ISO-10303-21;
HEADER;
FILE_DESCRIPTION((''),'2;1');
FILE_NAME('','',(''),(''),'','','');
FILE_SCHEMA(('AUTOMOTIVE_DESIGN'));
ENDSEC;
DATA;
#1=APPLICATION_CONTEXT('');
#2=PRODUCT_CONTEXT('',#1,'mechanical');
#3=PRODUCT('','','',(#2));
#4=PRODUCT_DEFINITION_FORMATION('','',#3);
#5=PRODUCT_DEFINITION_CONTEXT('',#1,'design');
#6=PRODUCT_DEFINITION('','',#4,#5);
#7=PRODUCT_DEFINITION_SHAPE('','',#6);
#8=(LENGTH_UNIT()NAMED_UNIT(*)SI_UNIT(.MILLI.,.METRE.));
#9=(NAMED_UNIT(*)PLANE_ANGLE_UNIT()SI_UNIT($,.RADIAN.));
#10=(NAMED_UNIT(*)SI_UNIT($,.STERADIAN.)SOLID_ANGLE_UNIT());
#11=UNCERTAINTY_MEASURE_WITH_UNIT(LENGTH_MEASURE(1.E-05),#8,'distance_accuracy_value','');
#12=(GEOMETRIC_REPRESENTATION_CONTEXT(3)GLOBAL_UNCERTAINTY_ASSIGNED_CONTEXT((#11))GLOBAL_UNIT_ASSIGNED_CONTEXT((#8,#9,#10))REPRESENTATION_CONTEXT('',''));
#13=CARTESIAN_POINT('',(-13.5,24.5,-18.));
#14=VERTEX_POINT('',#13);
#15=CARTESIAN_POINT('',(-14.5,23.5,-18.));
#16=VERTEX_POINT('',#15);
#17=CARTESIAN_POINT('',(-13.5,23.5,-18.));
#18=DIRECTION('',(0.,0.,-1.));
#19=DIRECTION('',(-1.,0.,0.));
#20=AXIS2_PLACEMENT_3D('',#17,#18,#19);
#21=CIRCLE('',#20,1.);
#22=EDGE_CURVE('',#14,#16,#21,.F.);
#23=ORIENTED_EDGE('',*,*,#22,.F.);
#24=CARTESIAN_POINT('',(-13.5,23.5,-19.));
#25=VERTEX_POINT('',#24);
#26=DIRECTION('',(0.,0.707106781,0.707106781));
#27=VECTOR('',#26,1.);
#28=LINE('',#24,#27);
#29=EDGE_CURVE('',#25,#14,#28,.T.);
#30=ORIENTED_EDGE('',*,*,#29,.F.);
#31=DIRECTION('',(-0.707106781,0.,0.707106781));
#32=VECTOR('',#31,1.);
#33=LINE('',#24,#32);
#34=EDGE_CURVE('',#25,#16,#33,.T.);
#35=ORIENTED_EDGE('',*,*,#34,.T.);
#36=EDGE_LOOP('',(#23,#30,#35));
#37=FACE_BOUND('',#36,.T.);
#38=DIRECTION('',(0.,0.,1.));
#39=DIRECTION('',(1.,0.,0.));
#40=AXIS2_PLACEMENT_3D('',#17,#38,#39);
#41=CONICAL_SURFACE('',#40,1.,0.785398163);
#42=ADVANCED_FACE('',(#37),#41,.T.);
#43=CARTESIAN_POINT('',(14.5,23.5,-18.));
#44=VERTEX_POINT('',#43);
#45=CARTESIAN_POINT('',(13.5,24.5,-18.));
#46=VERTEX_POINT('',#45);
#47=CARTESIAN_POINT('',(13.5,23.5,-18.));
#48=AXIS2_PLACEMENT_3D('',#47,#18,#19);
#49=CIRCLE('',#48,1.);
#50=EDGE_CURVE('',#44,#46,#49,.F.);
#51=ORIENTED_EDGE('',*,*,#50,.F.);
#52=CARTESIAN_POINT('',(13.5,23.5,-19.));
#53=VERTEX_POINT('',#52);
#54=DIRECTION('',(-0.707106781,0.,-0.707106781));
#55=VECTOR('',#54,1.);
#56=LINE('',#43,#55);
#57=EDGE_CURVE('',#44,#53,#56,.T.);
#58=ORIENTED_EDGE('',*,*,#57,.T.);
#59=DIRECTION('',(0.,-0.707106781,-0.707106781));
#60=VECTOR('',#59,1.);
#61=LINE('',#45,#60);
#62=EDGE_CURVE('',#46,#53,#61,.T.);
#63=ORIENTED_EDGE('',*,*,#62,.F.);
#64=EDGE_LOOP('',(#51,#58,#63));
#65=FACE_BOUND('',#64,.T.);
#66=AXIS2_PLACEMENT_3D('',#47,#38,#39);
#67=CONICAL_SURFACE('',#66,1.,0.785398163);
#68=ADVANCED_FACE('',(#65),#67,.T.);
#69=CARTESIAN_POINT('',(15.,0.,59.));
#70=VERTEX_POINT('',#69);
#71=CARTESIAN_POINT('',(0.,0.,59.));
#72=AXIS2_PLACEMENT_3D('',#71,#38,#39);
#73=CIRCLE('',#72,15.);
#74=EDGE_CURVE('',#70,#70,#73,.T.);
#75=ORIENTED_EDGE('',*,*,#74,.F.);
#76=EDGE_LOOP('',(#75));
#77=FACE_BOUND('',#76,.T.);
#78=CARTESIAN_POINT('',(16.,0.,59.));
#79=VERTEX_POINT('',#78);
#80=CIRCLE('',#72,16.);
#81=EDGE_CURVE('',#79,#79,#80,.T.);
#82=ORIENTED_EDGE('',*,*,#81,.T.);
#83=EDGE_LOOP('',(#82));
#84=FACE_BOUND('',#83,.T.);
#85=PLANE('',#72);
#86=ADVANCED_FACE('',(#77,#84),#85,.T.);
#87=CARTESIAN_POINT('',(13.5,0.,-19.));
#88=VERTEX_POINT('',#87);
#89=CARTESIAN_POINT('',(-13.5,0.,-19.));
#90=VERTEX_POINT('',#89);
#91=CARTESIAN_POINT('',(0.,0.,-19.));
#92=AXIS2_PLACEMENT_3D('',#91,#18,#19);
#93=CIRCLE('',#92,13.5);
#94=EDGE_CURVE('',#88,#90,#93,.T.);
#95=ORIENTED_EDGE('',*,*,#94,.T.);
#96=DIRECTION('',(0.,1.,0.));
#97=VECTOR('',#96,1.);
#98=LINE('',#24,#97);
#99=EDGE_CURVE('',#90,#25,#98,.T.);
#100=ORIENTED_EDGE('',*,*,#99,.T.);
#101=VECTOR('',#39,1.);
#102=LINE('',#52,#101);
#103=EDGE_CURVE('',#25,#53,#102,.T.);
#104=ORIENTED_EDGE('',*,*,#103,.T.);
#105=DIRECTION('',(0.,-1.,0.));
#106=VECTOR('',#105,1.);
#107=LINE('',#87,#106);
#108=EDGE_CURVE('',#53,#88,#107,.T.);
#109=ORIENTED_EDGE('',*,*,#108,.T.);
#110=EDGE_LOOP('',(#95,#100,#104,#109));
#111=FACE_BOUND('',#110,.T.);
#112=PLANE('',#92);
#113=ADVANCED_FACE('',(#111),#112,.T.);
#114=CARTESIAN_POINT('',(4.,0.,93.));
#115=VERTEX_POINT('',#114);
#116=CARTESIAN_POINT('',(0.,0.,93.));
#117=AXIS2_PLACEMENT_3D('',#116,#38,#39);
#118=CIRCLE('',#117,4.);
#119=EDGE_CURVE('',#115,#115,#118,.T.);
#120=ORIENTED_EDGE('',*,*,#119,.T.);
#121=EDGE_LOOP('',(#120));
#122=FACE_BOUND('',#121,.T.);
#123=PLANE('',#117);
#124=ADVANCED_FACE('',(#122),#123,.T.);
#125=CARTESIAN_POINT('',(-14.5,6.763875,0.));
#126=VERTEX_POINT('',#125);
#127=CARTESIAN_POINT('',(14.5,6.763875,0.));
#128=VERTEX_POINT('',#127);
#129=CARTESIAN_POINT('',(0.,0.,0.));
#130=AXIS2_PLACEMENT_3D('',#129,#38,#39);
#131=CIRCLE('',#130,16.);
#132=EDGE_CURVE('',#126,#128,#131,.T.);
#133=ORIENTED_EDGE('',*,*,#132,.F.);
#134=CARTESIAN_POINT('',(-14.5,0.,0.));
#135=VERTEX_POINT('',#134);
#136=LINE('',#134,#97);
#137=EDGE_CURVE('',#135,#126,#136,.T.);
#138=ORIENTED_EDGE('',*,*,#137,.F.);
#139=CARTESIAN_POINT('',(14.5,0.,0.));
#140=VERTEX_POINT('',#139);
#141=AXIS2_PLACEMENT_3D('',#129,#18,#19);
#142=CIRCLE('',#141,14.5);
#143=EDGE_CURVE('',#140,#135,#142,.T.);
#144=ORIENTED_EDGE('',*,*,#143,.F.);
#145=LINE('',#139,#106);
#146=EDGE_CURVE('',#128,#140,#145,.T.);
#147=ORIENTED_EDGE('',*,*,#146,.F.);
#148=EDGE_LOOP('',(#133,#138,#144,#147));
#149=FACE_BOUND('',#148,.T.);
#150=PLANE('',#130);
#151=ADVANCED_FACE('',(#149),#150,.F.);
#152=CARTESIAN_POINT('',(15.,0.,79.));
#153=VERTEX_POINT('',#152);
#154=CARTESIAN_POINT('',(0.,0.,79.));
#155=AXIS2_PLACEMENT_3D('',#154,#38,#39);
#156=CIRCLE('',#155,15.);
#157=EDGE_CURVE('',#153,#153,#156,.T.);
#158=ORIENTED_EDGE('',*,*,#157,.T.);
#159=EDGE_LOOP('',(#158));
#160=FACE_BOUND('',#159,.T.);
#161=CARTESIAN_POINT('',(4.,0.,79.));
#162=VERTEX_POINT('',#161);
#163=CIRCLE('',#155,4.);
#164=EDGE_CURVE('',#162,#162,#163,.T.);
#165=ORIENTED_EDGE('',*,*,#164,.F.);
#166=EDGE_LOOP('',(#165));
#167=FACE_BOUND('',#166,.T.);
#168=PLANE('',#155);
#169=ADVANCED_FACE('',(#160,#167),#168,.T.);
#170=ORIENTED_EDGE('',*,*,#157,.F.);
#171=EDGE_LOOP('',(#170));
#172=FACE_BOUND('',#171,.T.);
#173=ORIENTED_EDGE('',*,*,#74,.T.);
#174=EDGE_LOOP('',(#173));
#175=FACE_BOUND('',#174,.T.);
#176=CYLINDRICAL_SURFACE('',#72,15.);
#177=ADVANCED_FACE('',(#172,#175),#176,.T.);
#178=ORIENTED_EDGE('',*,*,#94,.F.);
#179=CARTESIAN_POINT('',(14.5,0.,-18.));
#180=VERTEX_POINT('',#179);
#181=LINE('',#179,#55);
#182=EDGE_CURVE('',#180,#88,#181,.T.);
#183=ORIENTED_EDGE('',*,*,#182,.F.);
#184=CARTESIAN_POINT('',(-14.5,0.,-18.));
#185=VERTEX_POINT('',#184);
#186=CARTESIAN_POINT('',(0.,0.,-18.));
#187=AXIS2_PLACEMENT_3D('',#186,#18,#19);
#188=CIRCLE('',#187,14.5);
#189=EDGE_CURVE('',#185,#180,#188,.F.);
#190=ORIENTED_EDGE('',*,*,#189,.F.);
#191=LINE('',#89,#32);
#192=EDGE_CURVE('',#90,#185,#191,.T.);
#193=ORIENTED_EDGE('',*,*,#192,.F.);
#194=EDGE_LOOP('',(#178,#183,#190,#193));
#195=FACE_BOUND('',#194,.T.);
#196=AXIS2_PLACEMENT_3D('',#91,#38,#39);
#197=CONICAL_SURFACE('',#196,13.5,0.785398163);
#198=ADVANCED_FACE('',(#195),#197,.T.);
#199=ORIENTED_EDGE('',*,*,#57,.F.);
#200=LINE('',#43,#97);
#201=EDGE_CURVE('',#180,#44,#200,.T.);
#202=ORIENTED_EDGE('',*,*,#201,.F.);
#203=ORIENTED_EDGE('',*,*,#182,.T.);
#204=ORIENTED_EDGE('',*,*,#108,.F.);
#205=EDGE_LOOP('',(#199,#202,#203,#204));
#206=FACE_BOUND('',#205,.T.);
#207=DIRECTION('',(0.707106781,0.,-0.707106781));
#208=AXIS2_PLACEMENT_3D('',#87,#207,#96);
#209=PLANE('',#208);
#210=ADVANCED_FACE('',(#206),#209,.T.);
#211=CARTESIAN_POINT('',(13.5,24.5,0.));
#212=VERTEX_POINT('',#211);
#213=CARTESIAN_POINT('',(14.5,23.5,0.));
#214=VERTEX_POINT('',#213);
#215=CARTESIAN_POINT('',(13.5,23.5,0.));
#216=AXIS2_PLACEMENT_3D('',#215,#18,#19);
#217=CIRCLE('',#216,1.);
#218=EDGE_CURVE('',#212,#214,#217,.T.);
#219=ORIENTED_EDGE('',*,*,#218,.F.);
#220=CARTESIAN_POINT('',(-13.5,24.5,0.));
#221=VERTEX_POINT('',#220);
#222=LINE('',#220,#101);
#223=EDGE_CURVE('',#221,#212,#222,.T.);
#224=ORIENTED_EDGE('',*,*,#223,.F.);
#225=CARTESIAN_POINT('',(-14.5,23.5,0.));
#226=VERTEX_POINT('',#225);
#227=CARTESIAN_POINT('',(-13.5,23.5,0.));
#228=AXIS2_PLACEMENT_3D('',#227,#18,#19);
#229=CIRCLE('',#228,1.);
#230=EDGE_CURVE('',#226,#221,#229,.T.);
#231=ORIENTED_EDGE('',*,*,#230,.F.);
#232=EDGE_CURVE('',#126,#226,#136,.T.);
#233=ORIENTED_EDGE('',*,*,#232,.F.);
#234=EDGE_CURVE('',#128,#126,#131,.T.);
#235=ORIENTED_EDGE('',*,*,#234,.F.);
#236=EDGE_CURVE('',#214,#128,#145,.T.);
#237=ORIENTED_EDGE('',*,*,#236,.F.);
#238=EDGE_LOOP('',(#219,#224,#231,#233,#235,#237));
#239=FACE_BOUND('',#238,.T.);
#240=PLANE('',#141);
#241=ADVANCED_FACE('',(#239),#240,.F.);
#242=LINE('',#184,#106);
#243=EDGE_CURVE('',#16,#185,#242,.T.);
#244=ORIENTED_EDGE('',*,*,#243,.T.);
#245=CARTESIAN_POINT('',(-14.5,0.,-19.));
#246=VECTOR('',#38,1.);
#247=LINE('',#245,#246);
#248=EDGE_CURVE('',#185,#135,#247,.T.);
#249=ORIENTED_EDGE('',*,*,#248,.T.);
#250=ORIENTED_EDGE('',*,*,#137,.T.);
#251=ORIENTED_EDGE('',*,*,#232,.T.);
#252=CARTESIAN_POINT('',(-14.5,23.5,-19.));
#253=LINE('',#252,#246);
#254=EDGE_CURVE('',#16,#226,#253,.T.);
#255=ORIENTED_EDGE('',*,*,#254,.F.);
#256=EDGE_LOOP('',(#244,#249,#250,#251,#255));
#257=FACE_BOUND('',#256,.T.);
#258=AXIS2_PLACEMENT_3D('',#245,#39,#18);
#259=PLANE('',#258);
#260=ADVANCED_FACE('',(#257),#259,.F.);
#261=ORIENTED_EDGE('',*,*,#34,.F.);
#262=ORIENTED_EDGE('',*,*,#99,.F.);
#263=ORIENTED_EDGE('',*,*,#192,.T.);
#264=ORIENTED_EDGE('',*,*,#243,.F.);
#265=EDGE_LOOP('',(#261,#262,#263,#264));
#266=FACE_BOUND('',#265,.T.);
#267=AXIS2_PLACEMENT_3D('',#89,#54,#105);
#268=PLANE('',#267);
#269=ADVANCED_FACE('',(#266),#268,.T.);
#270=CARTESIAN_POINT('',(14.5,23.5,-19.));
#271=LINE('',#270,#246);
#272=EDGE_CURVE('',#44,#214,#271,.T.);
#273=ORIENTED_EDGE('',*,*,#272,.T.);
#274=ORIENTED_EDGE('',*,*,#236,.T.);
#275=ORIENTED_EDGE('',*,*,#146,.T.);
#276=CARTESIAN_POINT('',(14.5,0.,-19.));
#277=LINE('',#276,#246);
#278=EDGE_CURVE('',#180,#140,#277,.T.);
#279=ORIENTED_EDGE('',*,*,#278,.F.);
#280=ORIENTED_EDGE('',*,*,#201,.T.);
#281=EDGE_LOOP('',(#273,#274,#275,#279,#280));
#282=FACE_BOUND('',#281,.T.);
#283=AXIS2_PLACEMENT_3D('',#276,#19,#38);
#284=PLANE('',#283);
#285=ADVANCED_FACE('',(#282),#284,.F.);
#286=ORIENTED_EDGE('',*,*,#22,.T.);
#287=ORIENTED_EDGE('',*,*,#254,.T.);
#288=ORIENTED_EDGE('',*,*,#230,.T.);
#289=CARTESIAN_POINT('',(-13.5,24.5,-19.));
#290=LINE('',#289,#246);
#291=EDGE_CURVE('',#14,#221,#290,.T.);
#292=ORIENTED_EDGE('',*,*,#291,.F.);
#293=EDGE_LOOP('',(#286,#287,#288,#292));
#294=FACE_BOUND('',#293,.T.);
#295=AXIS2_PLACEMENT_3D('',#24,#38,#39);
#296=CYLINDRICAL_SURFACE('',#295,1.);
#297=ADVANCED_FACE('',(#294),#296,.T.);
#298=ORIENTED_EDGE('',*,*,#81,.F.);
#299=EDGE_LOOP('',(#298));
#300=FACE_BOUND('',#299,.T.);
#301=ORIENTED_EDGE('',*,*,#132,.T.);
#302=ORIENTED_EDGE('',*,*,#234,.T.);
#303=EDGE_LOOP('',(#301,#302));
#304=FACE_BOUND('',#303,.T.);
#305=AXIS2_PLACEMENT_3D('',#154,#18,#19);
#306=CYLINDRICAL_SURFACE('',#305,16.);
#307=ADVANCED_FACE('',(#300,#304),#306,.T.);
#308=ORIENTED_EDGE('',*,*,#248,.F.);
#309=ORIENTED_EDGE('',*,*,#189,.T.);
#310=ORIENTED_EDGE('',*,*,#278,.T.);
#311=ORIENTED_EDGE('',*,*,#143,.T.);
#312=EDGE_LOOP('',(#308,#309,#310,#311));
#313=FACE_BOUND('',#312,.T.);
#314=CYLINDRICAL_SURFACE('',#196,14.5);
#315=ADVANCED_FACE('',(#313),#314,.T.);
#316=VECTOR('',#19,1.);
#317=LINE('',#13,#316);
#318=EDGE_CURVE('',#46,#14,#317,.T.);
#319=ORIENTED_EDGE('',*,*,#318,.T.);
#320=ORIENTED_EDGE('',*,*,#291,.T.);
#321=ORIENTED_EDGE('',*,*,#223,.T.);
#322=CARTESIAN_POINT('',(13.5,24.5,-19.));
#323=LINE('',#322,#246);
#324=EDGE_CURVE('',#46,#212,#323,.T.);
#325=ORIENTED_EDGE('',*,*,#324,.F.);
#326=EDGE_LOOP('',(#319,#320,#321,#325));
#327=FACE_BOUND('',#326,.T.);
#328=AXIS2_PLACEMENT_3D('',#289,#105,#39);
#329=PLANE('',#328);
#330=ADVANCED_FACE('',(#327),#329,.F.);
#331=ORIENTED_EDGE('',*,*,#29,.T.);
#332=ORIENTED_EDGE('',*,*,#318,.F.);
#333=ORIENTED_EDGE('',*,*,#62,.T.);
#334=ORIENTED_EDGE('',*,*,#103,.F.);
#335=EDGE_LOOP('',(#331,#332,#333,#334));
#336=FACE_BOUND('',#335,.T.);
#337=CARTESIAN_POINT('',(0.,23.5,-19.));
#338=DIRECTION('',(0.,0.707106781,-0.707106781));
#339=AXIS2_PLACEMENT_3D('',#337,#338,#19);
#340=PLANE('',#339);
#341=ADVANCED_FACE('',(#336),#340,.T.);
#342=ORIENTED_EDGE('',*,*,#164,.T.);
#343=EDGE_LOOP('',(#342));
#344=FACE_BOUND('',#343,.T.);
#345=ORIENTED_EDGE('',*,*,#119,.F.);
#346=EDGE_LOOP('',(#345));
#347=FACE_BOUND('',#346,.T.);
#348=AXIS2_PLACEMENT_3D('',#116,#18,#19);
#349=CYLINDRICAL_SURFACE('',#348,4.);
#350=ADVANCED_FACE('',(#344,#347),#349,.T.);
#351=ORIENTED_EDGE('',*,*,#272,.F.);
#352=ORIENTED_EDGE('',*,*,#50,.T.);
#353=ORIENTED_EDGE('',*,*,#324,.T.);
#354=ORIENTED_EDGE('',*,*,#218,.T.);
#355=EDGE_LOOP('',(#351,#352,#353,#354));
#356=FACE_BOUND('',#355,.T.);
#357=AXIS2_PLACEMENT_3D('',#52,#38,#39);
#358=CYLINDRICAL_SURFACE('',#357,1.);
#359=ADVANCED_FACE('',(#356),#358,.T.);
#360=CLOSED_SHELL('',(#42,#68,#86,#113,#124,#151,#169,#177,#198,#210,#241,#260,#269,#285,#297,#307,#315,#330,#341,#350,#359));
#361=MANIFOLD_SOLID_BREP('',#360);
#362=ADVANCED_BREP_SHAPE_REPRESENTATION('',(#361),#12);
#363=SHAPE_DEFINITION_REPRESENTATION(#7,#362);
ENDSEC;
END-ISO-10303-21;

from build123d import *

# Parameters (mm, degrees)
SKETCH_1_R          = 16
EXTRUDE_1_DEPTH     = 79
SKETCH_2_R          = 4
EXTRUDE_2_DEPTH     = 14
CUT_EXTRUDE_START   = -20
SKETCH_3_R          = 16
SKETCH_3_R_2        = 15
CUT_EXTRUDE_1_DEPTH = 20
EXTRUDE_3_DEPTH     = 19
CHAMFER_1_SIZE      = 1


with BuildPart() as part:
    # 草圖1 → 填料-伸長1 (new body)
    with BuildSketch(Plane.XY):
        Circle(SKETCH_1_R)
    extrude(amount=EXTRUDE_1_DEPTH)

    # 草圖2 → 填料-伸長2 (add)
    with BuildSketch(Plane.XY.offset(79)):
        Circle(SKETCH_2_R)
    extrude(amount=EXTRUDE_2_DEPTH)

    # 草圖3 → 除料-伸長1 (cut)
    with BuildSketch(Plane.XY.offset(79).offset(CUT_EXTRUDE_START)):
        Circle(SKETCH_3_R)
        Circle(SKETCH_3_R_2, mode=Mode.SUBTRACT)
    extrude(amount=CUT_EXTRUDE_1_DEPTH, mode=Mode.SUBTRACT)

    # 草圖4 → 填料-伸長3 (add)
    with BuildSketch(Plane(origin=(0, 0, 0), x_dir=(-1, 0, 0), z_dir=(0, 0, -1))):
        with BuildLine():
            Line((14.5, 0), (14.5, 23.5))
            ThreePointArc((14.5, 23.5), (14.207106781, 24.207106781), (13.5, 24.5))
            Line((13.5, 24.5), (-13.5, 24.5))
            ThreePointArc((-13.5, 24.5), (-14.207106781, 24.207106781), (-14.5, 23.5))
            Line((-14.5, 23.5), (-14.5, 0))
            ThreePointArc((-14.5, 0), (0, -14.5), (14.5, 0))
        make_face()
    extrude(amount=EXTRUDE_3_DEPTH)

    # 導角1
    chamfer_1_edges = [part.edges().sort_by_distance(p)[0] for p in [
        (0, -14.5, -19),
        (-14.5, 11.75, -19),
        (-14.207106781, 24.207106781, -19),
        (0, 24.5, -19),
        (14.207106781, 24.207106781, -19),
        (14.5, 11.75, -19),
    ]]
    chamfer(chamfer_1_edges, length=CHAMFER_1_SIZE - 0.0001)  # a hair under: the kernel refuses the full size


solid = part.part
